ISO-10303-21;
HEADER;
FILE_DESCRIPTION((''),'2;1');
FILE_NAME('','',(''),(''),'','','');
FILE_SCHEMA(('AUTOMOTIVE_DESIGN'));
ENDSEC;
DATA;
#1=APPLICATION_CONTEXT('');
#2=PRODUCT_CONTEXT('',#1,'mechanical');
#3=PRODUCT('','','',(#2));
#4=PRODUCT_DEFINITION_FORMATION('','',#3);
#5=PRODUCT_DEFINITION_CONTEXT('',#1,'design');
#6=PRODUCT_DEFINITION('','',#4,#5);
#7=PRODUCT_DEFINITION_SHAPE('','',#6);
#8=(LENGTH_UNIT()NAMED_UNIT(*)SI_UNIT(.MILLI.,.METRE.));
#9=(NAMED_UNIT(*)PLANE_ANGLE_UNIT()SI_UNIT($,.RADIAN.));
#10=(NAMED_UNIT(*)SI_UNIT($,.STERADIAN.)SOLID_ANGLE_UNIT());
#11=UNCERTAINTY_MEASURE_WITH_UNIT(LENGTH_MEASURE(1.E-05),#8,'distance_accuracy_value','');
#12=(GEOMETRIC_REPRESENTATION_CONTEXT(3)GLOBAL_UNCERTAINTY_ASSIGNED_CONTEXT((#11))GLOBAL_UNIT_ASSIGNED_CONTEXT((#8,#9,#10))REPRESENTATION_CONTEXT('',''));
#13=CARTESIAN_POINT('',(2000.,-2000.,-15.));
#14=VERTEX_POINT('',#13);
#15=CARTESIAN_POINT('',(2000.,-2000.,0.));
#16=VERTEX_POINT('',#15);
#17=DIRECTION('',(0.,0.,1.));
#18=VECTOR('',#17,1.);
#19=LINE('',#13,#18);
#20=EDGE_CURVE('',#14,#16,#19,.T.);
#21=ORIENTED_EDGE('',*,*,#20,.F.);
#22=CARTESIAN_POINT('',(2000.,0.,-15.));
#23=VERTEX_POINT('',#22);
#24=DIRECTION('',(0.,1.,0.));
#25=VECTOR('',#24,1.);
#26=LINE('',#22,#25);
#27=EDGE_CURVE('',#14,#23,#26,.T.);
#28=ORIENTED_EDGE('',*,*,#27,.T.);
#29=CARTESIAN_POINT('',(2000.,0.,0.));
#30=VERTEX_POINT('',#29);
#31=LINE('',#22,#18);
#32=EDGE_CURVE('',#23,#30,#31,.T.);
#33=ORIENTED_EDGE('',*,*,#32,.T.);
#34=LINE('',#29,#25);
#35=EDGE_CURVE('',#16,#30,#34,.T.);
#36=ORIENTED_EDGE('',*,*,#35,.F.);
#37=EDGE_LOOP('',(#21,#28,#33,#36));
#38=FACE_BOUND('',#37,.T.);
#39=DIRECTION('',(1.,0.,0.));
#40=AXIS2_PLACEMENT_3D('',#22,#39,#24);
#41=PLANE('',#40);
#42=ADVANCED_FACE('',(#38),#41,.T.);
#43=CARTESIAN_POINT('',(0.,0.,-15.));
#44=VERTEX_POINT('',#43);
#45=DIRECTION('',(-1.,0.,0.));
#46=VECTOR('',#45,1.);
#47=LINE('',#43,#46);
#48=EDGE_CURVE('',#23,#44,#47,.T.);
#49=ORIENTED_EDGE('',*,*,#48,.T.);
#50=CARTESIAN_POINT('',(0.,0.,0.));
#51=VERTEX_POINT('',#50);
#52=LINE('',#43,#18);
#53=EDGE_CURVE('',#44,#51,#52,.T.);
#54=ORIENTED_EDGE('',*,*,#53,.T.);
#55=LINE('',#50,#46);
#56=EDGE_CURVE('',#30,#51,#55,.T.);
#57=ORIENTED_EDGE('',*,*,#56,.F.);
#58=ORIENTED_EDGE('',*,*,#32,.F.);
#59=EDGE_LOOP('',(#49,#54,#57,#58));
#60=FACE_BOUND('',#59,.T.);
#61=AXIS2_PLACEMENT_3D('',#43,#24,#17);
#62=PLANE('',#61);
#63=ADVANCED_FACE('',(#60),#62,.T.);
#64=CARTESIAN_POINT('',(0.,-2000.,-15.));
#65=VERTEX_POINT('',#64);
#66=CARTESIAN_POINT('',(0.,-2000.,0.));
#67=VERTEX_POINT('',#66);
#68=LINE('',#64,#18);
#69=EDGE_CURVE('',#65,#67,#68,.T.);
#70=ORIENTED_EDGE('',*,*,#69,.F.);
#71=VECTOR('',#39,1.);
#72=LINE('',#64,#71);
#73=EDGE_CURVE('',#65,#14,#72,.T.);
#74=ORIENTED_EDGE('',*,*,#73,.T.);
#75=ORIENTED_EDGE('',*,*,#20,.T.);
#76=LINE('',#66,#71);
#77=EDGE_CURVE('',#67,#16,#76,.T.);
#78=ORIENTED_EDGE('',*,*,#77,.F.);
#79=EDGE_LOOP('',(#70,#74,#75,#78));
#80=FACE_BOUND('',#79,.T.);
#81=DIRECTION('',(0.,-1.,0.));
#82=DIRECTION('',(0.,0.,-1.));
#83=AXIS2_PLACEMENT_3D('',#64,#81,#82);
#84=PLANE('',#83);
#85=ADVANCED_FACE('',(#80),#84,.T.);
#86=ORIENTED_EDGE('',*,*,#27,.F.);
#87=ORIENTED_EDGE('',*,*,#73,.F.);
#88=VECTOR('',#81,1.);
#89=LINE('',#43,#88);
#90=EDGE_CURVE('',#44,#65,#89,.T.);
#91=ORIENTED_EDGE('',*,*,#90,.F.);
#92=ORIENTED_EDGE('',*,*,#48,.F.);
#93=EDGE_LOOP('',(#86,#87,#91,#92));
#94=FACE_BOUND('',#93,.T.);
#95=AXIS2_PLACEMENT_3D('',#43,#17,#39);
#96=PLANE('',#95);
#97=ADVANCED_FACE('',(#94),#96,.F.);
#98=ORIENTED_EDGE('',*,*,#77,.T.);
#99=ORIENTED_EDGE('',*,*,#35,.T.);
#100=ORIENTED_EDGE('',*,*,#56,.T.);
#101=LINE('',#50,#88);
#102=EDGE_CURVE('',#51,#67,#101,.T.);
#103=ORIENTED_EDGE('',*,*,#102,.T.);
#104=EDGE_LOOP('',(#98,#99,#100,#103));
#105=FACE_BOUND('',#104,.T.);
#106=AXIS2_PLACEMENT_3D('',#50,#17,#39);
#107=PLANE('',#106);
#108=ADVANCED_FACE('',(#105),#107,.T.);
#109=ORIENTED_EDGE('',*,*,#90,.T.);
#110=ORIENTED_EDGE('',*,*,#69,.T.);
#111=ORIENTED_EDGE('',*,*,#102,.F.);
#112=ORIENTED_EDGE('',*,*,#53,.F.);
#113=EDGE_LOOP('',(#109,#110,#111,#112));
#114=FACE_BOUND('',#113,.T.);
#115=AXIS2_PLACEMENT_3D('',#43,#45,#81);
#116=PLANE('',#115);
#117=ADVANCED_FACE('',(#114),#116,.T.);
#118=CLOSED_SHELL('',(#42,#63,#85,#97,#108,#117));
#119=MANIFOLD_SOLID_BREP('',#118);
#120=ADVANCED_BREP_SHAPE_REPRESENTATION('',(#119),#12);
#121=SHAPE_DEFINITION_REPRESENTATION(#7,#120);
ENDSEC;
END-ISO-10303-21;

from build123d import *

# Parameters (mm, degrees)
IZIM1_W            = 2000
IZIM1_H            = 2000
TABAN_FLAN_1_DEPTH = 15


# Sheet-metal steps are written as plain solids
with BuildPart() as part:
    # Çizim1 → Taban-Flanş1 (new body)
    with BuildSketch(Plane.XY):
        with Locations((1000, -1000)):
            Rectangle(IZIM1_W, IZIM1_H)
    extrude(amount=-TABAN_FLAN_1_DEPTH)


solid = part.part
